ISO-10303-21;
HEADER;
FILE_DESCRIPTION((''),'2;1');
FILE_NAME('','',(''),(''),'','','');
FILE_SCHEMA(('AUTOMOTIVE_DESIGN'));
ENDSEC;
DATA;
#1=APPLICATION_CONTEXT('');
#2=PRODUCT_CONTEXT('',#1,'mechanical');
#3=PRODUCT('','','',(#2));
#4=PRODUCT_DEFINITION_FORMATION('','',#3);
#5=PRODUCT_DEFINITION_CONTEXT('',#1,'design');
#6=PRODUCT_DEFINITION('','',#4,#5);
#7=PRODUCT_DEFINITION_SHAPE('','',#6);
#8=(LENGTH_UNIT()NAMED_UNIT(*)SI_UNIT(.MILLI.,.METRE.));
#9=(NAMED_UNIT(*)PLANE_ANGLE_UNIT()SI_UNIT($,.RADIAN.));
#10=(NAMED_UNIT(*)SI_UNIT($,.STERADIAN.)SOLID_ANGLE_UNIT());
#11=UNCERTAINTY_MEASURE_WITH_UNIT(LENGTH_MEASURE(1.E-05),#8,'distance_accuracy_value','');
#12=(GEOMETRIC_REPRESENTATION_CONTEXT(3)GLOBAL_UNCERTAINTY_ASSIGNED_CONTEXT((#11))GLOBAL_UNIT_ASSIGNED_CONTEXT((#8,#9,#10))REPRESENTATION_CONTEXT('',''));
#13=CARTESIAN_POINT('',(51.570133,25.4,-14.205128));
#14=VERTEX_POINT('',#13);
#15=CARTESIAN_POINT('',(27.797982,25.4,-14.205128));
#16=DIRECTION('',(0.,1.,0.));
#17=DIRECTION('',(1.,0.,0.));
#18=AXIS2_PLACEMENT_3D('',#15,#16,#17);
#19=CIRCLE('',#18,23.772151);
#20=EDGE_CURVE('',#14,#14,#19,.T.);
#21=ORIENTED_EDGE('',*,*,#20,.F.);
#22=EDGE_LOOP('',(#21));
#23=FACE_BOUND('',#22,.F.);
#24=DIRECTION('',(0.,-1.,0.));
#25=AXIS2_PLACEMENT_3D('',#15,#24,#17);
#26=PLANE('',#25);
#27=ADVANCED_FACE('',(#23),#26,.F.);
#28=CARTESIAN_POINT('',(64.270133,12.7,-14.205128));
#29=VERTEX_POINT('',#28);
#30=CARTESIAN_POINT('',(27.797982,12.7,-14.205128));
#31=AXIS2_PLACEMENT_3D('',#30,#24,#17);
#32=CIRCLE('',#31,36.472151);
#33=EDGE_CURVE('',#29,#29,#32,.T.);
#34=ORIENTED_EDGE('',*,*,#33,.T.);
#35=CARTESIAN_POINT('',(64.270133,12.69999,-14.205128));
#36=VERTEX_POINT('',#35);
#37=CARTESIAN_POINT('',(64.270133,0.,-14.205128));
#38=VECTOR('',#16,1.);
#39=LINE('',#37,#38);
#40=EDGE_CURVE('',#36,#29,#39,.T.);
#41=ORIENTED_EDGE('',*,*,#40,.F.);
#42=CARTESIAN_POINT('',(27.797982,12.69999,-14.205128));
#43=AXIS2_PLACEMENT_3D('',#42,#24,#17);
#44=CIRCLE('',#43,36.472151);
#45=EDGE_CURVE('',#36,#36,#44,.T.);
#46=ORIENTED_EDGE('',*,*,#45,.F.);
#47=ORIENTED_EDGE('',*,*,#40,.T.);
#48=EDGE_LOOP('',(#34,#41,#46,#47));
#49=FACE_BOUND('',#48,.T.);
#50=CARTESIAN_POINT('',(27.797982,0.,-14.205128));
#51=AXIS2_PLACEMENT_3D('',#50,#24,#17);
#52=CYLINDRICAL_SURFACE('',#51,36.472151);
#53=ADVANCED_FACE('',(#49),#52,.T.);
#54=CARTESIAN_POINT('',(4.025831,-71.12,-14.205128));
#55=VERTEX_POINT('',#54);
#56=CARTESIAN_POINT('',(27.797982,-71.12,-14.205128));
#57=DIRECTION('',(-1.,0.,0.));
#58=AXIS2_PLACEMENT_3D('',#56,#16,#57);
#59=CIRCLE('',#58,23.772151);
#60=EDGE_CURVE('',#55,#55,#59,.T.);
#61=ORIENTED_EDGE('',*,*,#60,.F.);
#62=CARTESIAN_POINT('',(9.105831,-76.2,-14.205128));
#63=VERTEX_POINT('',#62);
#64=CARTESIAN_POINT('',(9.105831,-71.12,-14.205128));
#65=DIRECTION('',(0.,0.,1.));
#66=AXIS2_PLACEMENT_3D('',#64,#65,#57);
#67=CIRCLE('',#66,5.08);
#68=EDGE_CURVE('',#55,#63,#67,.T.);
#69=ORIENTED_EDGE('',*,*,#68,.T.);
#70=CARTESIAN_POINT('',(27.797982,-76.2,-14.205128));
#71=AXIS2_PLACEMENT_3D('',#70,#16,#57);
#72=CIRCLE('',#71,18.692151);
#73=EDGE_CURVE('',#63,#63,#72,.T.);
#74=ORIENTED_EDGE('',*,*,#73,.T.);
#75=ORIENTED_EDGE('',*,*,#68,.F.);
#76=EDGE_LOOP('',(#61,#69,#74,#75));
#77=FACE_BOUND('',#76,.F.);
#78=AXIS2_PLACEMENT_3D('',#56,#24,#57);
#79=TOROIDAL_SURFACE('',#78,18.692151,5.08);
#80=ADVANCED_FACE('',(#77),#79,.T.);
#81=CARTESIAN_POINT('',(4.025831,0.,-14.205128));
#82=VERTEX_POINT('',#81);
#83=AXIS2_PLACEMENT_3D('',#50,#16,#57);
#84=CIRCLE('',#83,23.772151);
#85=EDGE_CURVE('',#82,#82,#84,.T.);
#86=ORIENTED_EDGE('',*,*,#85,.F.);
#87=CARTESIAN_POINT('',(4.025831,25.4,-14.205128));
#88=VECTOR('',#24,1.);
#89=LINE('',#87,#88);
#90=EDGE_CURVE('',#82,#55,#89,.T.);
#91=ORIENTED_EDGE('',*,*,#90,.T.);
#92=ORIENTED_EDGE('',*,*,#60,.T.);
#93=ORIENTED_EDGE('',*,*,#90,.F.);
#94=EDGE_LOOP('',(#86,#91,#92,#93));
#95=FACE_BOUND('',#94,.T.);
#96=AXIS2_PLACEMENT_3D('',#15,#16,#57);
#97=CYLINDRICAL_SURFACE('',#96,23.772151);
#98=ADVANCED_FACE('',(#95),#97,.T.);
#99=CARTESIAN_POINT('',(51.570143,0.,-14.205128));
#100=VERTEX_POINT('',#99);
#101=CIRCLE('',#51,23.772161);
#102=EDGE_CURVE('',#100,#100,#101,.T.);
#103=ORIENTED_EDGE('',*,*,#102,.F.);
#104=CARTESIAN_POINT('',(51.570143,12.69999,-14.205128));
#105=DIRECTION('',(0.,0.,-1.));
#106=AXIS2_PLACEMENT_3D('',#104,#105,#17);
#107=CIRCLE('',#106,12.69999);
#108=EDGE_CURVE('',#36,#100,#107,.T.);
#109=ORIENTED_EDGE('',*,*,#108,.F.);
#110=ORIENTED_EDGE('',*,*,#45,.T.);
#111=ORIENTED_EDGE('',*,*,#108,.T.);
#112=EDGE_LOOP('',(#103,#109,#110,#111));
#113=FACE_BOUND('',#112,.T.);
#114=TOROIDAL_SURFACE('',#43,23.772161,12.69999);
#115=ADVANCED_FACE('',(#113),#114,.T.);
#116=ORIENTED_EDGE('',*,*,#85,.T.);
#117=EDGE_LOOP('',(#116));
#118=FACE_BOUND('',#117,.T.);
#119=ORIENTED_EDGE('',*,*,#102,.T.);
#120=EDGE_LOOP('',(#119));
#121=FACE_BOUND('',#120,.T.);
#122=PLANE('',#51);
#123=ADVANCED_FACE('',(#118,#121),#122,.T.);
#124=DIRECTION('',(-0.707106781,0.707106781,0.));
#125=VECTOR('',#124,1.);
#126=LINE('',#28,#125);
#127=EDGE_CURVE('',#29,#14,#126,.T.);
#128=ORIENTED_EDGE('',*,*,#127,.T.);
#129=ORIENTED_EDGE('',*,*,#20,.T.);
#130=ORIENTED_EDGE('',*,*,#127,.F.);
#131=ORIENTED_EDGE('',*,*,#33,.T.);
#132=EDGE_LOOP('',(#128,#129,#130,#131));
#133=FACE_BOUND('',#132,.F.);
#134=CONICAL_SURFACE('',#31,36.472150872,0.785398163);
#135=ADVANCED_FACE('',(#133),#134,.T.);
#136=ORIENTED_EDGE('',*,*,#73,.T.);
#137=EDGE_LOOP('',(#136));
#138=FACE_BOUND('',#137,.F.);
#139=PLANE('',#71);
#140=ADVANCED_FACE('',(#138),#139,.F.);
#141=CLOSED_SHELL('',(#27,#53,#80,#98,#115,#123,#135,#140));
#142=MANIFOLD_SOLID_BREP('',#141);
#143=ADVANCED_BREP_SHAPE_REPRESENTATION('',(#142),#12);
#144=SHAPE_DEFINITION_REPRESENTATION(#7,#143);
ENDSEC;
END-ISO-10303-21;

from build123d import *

# Parameters (mm, degrees)
F1_R     = 36.4721508719
F2_DEPTH = 25.399999693
F3_SIZE  = 12.7
F4_R     = 12.69999
F5_R     = 23.7721508719
F6_DEPTH = 101.6
F7_R     = 5.08


# Not quite as in the source:
# - a fillet or chamfer is up to 0.001 mm smaller than in the source, because OpenCascade refuses the exact size


with BuildPart() as f2:
    # F1 (on face) → F2 (new body)
    with BuildSketch(Plane.XZ):
        with Locations((27.7979820967, -14.2051279545)):
            Circle(F1_R)
    extrude(amount=-F2_DEPTH)

    # F3
    f3_edges = [f2.edges().sort_by_distance(p)[0] for p in [
        (-8.674169, 25.4, -14.205128),
    ]]
    chamfer(f3_edges, length=F3_SIZE)

    # F4 (radius 12.7 in the source; OpenCascade refuses exactly that, so slightly less here)
    f4_edges = [f2.edges().sort_by_distance(p)[0] for p in [
        (-8.674169, 0, -14.205128),
    ]]
    fillet(f4_edges, radius=F4_R)

    # F5 (on face) → F6 (join)
    with BuildSketch(Plane(origin=(0, 25.399999693, 0), x_dir=(-1, 0, 0), z_dir=(0, 1, 0))):
        with Locations((-27.7979820967, -14.2051279545)):
            Circle(F5_R)
    extrude(amount=-F6_DEPTH)

    # F7
    f7_edges = [f2.edges().sort_by_distance(p)[0] for p in [
        (51.570133, -76.2, -14.205128),
    ]]
    fillet(f7_edges, radius=F7_R)


solid = f2.part
